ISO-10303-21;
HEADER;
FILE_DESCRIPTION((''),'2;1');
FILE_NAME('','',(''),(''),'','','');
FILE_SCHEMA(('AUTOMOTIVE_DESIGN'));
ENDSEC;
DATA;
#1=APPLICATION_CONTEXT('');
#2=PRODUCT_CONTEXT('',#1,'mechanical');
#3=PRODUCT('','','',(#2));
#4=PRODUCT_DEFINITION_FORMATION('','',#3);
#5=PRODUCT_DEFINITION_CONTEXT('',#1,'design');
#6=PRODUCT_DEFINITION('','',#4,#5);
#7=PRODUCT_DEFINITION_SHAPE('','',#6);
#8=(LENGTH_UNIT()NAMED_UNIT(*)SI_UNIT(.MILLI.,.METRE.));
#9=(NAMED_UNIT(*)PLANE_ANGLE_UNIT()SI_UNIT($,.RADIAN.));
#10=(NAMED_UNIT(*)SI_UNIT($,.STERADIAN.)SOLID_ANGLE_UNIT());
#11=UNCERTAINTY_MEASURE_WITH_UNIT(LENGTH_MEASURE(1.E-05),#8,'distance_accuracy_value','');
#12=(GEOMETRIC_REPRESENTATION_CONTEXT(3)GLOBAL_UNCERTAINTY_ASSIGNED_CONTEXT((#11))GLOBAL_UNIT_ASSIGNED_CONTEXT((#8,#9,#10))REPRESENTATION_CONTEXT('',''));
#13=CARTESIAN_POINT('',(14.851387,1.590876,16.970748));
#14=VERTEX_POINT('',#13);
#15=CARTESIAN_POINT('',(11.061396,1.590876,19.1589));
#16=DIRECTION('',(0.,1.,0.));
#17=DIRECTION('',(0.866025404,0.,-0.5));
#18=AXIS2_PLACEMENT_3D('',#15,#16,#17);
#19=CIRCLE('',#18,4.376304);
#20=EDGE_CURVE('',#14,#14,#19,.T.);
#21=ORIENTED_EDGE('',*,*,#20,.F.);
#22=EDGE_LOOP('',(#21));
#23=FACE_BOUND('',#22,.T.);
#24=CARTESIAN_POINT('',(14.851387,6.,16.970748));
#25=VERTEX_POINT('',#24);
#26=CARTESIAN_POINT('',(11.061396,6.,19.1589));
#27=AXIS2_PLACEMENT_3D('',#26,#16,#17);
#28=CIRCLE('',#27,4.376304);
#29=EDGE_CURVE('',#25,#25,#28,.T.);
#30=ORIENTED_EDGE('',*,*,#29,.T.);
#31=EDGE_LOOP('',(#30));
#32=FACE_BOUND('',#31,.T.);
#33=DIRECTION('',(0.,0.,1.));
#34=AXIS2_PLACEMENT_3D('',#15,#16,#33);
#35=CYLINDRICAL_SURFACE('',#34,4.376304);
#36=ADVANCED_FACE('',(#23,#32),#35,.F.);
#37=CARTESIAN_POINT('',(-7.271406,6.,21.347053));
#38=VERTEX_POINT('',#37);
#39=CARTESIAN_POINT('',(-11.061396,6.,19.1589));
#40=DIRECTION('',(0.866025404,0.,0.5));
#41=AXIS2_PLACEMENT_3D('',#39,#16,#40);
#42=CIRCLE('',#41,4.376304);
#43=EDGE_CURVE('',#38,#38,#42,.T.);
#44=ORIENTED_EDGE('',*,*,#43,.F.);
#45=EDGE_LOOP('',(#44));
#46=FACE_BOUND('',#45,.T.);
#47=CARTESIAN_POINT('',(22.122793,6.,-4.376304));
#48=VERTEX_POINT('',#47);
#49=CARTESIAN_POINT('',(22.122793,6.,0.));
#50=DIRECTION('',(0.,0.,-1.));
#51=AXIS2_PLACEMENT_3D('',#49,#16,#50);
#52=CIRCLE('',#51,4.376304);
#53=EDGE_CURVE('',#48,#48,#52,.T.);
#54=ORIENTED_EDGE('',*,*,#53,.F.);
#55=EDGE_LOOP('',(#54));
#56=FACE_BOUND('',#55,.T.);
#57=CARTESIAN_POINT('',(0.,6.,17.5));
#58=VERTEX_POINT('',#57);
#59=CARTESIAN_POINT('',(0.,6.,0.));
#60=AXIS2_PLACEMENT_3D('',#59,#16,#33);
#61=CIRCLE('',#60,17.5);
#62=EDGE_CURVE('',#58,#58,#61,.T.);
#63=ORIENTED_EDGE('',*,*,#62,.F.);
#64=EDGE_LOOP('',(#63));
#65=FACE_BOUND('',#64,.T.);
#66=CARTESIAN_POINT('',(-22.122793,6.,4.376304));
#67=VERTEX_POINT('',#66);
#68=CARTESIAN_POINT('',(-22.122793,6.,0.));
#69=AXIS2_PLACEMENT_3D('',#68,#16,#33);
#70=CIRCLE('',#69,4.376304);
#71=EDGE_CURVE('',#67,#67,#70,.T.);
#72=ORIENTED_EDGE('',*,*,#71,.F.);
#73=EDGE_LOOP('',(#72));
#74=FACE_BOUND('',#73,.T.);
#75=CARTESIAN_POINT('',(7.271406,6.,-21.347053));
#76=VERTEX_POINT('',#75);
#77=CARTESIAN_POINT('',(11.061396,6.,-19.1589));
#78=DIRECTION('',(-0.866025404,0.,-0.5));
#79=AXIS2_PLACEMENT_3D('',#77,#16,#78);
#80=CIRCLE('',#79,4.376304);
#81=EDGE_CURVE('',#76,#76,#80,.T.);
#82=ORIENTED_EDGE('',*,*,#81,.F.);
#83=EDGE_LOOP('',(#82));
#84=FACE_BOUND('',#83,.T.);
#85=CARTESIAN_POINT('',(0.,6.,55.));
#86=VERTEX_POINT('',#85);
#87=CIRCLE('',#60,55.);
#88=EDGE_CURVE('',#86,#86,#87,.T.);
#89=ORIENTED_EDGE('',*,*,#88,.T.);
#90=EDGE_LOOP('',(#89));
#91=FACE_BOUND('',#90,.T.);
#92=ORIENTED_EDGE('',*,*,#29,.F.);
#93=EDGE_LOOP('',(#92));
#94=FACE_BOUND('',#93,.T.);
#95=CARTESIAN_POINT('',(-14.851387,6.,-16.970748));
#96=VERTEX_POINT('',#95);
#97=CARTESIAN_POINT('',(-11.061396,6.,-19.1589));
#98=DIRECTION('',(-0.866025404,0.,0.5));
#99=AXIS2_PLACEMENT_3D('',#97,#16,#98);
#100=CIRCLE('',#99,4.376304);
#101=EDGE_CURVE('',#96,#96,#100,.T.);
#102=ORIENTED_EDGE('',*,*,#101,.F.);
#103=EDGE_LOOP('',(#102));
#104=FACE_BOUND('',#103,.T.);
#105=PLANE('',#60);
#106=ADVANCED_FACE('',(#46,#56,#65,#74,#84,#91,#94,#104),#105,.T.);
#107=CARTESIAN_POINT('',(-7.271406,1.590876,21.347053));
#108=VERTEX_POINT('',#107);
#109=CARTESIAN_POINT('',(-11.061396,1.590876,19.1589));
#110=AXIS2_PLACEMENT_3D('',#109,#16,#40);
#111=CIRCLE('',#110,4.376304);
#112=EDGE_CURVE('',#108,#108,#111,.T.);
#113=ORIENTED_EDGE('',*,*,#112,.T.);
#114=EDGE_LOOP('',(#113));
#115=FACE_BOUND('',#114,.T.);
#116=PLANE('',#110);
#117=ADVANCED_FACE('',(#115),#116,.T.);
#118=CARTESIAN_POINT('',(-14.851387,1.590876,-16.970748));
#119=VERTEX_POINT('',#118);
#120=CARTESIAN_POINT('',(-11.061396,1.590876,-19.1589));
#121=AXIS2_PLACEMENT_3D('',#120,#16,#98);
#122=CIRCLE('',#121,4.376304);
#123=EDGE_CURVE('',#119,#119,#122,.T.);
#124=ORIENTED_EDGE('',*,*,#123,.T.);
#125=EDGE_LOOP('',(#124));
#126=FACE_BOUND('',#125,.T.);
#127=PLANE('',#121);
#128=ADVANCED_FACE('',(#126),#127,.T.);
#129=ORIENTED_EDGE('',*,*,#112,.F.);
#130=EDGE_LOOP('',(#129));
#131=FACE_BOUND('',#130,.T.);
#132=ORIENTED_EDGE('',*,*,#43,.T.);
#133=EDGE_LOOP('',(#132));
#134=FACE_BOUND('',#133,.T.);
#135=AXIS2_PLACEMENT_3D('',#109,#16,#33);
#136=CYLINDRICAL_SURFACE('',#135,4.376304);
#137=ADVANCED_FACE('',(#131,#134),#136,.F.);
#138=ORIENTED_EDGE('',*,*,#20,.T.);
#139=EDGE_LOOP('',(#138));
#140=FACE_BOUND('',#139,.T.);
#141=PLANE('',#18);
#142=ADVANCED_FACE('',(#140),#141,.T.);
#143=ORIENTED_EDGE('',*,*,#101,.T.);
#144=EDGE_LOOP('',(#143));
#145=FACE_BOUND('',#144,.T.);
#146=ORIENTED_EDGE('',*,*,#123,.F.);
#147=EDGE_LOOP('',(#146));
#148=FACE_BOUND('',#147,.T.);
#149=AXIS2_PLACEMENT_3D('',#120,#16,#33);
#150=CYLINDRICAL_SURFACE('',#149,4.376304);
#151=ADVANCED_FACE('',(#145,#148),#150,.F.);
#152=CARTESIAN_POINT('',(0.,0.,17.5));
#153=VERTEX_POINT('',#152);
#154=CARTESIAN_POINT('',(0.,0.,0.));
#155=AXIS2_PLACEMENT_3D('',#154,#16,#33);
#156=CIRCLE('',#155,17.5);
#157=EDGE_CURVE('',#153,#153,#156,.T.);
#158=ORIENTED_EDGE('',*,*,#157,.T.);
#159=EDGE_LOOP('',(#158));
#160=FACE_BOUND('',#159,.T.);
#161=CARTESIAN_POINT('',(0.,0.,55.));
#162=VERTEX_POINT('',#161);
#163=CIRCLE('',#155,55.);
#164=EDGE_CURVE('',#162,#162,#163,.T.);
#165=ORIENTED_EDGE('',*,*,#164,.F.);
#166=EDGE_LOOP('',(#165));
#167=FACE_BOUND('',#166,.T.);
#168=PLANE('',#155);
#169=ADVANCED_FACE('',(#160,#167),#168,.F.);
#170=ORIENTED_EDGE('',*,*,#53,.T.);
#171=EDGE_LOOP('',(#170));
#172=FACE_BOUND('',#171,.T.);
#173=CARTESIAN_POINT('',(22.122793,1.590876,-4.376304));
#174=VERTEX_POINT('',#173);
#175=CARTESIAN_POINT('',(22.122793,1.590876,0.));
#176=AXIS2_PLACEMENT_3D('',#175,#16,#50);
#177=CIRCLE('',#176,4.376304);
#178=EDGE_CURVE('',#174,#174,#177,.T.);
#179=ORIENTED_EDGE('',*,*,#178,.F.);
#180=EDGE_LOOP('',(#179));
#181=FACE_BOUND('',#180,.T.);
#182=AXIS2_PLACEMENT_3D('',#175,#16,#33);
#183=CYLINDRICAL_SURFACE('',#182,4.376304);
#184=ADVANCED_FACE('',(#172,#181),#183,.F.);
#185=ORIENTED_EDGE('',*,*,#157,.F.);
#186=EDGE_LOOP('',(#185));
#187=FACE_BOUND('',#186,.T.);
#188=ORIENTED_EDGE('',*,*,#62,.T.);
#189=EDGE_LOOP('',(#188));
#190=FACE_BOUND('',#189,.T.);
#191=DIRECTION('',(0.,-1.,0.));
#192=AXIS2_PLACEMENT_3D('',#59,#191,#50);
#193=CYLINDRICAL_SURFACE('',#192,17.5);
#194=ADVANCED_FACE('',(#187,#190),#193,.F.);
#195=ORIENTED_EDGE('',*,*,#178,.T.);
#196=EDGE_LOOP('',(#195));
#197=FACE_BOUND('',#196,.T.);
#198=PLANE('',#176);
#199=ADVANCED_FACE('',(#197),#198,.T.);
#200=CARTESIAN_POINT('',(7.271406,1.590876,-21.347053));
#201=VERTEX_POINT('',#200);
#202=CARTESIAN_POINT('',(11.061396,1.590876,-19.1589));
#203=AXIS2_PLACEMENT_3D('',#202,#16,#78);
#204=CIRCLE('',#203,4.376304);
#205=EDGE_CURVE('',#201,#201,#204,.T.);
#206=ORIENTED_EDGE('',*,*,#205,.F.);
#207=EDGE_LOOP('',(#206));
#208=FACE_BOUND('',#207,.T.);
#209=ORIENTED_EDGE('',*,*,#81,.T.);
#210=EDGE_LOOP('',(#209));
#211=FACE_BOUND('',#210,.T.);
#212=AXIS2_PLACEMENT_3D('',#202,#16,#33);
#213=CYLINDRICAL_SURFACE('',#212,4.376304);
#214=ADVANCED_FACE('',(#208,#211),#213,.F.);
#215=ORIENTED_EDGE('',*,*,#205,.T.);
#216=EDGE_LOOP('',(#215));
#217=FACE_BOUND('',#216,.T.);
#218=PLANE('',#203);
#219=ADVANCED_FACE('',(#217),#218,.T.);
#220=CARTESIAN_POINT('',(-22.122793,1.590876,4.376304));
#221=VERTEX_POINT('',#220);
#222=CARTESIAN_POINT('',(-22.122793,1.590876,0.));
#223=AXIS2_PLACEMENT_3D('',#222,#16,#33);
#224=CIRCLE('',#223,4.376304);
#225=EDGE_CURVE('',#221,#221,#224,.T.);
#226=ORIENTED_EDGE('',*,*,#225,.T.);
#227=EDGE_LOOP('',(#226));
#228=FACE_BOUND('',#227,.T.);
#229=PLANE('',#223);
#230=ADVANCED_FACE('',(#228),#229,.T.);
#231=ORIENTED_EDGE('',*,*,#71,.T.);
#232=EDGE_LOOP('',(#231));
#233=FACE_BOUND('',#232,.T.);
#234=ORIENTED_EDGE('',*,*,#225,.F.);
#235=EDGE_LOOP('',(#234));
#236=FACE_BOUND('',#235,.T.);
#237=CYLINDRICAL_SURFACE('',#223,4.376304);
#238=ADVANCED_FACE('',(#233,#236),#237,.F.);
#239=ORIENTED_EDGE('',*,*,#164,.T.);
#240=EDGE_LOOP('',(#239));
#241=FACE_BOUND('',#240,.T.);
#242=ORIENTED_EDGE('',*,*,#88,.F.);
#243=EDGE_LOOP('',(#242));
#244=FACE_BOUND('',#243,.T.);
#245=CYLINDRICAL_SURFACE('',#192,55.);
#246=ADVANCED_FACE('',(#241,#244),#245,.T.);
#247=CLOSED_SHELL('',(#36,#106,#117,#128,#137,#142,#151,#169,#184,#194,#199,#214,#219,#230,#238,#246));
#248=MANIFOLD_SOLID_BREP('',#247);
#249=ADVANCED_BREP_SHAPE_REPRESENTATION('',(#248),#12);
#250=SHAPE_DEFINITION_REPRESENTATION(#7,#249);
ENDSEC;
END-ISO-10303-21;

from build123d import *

# Parameters (mm, degrees)
SKETCH1_R           = 55
BOSS_EXTRUDE1_DEPTH = 6
SKETCH2_R           = 17.5
CUT_EXTRUDE1_DEPTH  = 79.012819459
SKETCH3_R           = 4.37630442
CUT_EXTRUDE2_DEPTH  = 4.409124383
CIRPATTERN1_COUNT   = 6


with BuildPart() as part:
    # Sketch1 → Boss-Extrude1 (new body)
    with BuildSketch(Plane(origin=(0, 0, 0), x_dir=(1, 0, 0), z_dir=(0, 1, 0))):
        Circle(SKETCH1_R)
    extrude(amount=BOSS_EXTRUDE1_DEPTH)

    # Sketch2 → Cut-Extrude1 (cut, through all)
    with BuildSketch(Plane(origin=(0, 0, 0), x_dir=(1, 0, 0), z_dir=(0, 1, 0))):
        Circle(SKETCH2_R)
    extrude(amount=CUT_EXTRUDE1_DEPTH, mode=Mode.SUBTRACT)

    # Sketch3 → Cut-Extrude2 (cut)
    with BuildSketch(Plane(origin=(0, 6, 0), x_dir=(1, 0, 0), z_dir=(0, 1, 0))):
        with Locations((-22.122792646, 0)):
            Circle(SKETCH3_R)
    cut_extrude2 = extrude(amount=-CUT_EXTRUDE2_DEPTH, mode=Mode.SUBTRACT)

    # CirPattern1: Cut-Extrude2 ×6 about axis
    cirpattern1_axis = Axis((0, 0, 0), (0, 1, 0))
    for i in range(1, CIRPATTERN1_COUNT):
        add(cut_extrude2.rotate(cirpattern1_axis, i * 360 / CIRPATTERN1_COUNT), mode=Mode.SUBTRACT)


solid = part.part
